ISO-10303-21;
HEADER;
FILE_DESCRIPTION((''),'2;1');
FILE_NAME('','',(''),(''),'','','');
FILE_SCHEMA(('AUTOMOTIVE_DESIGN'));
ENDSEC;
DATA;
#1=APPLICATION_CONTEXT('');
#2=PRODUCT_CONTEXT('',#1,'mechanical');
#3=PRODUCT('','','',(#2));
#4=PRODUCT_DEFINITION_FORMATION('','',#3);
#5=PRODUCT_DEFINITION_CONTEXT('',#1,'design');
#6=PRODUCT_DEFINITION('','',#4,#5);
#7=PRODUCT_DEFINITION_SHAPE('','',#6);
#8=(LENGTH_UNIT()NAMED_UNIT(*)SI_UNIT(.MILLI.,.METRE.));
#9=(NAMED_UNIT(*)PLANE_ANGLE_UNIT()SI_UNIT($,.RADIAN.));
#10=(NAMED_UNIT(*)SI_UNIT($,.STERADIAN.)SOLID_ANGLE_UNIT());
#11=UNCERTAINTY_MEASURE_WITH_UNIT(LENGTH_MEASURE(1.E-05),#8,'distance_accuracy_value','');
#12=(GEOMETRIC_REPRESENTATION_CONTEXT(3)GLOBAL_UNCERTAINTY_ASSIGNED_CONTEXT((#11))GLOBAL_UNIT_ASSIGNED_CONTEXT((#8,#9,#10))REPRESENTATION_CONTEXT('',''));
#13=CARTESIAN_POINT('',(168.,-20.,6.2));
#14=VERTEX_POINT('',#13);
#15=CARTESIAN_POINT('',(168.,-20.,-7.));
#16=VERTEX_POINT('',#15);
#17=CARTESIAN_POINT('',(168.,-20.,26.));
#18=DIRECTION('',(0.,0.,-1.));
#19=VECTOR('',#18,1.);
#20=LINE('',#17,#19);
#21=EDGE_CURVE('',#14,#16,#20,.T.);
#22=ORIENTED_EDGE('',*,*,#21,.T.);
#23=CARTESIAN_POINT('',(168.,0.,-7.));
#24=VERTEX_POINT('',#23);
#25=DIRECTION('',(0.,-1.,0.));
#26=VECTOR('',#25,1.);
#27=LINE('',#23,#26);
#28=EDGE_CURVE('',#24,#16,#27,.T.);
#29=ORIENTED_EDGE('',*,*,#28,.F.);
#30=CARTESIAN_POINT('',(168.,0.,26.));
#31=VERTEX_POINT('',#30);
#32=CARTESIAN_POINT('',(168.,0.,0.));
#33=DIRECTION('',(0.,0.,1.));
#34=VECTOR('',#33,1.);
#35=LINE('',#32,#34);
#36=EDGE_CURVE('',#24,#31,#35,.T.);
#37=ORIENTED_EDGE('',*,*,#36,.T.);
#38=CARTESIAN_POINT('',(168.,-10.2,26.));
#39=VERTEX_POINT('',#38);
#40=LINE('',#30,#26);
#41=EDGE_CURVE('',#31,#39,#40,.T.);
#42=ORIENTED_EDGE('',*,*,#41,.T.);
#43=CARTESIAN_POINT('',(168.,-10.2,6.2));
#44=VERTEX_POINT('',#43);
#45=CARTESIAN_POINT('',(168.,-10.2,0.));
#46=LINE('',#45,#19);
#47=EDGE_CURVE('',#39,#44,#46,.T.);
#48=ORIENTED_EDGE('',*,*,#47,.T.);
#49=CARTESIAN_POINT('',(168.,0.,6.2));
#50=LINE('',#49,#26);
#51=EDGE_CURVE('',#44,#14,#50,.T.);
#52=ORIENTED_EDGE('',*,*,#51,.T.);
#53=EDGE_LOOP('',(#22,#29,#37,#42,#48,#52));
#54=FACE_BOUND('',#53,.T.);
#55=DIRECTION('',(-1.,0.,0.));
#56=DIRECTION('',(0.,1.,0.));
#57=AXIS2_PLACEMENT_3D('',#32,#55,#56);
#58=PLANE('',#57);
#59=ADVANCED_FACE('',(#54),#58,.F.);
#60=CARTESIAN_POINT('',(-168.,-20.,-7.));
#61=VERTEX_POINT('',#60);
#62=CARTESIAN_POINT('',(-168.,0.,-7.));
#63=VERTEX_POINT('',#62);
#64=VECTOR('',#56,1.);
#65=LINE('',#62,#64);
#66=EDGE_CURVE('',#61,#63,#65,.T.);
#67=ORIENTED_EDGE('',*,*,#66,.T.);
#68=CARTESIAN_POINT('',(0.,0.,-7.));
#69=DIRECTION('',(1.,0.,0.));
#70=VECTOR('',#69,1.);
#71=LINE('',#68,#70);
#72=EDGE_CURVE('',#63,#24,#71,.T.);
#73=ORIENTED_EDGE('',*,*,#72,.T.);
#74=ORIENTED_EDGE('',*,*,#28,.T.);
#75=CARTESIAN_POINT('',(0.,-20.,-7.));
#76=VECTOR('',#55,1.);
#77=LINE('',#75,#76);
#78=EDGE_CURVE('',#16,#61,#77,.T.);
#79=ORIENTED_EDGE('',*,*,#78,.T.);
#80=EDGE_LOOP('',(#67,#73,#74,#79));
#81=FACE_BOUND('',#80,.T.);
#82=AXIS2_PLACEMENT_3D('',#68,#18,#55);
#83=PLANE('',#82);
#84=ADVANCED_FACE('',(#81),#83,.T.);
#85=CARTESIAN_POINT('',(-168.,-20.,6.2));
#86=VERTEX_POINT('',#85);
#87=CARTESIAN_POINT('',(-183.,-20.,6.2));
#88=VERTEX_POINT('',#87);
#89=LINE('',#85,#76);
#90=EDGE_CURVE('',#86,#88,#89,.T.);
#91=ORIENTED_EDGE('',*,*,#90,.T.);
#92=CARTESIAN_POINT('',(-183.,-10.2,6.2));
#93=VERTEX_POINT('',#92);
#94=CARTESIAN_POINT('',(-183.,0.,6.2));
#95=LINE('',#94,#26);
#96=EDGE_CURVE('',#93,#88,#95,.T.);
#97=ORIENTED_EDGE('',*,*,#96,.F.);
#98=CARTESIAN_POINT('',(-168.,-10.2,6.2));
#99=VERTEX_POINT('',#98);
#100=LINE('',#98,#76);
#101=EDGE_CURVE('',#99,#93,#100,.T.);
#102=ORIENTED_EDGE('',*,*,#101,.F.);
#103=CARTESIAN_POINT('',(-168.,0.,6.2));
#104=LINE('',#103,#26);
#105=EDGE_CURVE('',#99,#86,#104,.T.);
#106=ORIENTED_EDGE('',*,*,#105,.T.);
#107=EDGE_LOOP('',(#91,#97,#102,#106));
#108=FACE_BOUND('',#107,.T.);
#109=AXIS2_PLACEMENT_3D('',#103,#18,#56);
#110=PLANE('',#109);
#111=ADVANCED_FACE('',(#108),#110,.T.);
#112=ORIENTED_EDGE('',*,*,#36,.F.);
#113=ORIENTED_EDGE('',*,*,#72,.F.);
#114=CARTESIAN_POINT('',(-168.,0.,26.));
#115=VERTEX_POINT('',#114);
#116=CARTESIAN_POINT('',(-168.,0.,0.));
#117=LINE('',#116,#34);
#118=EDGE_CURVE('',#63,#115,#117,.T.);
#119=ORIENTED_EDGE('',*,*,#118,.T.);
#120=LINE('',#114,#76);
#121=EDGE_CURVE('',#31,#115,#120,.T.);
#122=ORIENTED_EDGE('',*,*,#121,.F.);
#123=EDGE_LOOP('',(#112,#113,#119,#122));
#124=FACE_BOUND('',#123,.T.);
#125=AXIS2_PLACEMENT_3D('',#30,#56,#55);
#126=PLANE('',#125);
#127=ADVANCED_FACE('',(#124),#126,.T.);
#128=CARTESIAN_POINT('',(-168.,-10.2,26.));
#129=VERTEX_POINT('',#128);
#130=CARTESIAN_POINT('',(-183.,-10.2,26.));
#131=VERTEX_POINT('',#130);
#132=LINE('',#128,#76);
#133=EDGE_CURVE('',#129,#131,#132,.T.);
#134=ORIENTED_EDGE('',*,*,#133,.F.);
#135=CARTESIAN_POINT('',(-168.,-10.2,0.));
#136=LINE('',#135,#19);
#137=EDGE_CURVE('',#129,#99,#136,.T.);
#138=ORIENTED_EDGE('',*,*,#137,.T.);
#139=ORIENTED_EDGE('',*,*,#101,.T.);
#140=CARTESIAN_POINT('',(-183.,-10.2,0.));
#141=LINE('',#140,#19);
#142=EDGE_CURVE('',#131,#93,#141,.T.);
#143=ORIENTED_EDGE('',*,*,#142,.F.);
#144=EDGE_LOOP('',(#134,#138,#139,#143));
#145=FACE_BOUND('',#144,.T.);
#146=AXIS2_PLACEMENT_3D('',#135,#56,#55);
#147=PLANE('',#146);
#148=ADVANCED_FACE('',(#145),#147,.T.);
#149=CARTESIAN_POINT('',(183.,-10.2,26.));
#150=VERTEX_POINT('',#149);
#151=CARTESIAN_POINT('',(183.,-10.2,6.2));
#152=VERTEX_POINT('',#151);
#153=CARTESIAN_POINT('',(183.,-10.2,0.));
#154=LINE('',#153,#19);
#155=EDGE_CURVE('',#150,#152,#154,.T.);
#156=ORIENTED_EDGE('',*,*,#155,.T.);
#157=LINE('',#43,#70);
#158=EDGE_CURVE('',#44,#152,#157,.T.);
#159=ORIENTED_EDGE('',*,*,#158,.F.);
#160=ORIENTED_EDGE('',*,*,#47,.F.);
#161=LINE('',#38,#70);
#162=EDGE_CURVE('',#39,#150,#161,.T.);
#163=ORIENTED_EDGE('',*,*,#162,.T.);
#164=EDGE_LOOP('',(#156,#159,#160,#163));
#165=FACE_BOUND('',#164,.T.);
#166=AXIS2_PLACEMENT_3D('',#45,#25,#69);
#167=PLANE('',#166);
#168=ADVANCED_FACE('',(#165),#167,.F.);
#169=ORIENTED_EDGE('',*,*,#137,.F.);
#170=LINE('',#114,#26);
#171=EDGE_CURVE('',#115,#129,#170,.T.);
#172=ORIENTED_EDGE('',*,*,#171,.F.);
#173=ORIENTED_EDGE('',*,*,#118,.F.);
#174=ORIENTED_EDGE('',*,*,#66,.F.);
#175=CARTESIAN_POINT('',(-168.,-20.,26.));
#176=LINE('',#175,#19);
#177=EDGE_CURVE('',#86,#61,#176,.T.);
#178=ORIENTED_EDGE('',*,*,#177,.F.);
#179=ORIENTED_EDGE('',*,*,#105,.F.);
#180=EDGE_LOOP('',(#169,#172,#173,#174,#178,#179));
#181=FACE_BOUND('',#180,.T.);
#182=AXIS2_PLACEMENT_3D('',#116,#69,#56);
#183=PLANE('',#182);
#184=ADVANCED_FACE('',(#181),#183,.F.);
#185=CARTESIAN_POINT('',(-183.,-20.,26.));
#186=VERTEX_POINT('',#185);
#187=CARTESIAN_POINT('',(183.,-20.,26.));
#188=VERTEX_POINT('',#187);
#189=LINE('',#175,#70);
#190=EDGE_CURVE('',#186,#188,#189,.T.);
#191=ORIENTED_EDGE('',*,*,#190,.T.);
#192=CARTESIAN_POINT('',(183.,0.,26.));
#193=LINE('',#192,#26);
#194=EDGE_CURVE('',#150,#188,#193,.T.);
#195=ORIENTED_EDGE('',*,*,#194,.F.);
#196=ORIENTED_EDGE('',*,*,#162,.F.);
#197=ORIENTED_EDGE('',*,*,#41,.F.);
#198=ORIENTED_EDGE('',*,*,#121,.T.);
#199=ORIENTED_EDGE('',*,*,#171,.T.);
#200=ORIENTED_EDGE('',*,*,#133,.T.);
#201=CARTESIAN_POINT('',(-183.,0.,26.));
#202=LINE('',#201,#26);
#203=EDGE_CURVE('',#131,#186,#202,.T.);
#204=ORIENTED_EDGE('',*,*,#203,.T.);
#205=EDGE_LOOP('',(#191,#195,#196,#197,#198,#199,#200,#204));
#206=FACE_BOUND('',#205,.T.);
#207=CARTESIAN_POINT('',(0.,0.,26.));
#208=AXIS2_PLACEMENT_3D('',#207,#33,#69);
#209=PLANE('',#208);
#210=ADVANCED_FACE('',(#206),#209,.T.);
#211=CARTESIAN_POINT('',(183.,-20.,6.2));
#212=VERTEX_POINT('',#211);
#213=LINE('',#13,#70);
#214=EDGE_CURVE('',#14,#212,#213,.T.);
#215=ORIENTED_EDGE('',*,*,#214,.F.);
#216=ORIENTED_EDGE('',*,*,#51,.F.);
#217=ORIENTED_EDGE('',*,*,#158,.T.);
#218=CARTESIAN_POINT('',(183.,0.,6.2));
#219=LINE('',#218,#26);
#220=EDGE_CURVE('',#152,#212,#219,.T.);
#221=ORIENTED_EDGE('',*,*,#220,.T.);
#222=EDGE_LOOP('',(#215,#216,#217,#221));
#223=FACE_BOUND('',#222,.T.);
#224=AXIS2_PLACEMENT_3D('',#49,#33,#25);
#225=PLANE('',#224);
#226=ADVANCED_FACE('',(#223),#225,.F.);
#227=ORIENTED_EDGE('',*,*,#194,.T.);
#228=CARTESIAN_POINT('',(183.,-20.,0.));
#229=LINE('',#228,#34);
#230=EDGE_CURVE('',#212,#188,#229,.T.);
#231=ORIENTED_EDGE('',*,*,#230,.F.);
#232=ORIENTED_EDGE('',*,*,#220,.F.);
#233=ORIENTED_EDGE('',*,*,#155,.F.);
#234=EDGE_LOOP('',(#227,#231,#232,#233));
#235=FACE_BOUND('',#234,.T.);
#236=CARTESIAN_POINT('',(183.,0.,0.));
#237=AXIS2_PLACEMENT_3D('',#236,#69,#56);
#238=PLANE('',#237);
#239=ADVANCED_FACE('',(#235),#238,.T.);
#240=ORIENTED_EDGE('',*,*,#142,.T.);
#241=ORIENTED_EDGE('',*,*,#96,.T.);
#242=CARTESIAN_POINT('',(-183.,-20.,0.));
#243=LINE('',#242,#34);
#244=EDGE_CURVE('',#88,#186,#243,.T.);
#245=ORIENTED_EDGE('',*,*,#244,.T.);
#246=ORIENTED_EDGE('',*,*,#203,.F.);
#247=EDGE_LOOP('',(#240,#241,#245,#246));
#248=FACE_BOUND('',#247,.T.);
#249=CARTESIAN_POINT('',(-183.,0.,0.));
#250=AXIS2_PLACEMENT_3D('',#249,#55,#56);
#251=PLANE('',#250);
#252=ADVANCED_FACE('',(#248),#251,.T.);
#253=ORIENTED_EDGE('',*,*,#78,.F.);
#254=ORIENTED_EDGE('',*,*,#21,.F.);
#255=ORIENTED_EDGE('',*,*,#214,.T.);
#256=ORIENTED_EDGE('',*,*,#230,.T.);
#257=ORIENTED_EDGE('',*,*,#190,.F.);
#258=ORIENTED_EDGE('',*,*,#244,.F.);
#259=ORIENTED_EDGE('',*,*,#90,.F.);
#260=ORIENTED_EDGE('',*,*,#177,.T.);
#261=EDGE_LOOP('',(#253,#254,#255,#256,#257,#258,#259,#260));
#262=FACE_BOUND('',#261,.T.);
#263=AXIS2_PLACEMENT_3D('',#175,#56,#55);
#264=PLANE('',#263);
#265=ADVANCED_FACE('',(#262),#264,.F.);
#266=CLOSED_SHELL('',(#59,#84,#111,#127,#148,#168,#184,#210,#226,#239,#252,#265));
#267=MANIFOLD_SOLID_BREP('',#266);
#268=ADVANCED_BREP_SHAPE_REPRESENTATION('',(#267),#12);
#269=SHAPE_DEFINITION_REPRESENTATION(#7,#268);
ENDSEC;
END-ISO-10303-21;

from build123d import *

# Parameters (mm, degrees)
EXTRUDE_1_DEPTH        = 26
EXTRUDE_2_DEPTH        = 19
FILLET_1_R             = 10
SKETCH_1_5_W           = 11
SKETCH_1_5_H           = 340
EXTRUDE_4_DEPTH        = 7
SKETCH_6_W             = 1.9
SKETCH_6_H             = 2
SKETCH_6_W_2           = 6.6
EXTRUDE_5_DEPTH        = 28
SKETCH_6_3_W           = 6.6
SKETCH_6_3_H           = 2
CUT_EXTRUDE_2_DEPTH    = 5
FILLET_2_R             = 20
SKETCH_6_4_W           = 15
SKETCH_6_4_H           = 10
SKETCH_6_4_H_2         = 9
EXTRUDE_6_DEPTH        = 30
SKETCH_6_5_W           = 15
SKETCH_6_5_H           = 9
EXTRUDE_7_DEPTH        = 28
EXTRUDE_8_DEPTH        = 15
FILLET_3_R             = 20
FILLET_3_OF_MIRROR_2_R = 20
FILLET_4_R             = 20
SKETCH_10_W            = 161
SKETCH_10_H            = 20
SKETCH_10_W_2          = 14
EXTRUDE_9_DEPTH        = 7
SKETCH_12_W            = 33
SKETCH_12_H            = 20
CUT_EXTRUDE_3_DEPTH    = 42
SKETCH_11_W            = 19.8
SKETCH_11_H            = 9.8
EXTRUDE_10_DEPTH       = 15


with BuildPart() as part:
    # 스케치1 → 보스-돌출1 (new body)
    with BuildSketch(Plane.XY):
        Polygon((-168, 0), (168, 0), (183, 0), (183, -340), (168, -340), (168, -20), (-168, -20), (-168, -340), (-183, -340), (-183, 0), align=None)
    extrude(amount=EXTRUDE_1_DEPTH)

    # 스케치1<4> → 보스-돌출2 (add)
    with BuildSketch(Plane.XY):
        Polygon((172, 0), (168, 0), (168, -20), (168, -340), (172, -340), align=None)
        Polygon((-168, -20), (-168, 0), (-172, 0), (-172, -340), (-168, -340), align=None)
    extrude(amount=-EXTRUDE_2_DEPTH)

    # 필렛1
    fillet_1_edges = [part.edges().sort_by_distance(p)[0] for p in [
        (170, 0, -19),
        (170, -340, -19),
        (-170, -340, -19),
        (-170, 0, -19),
    ]]
    fillet(fillet_1_edges, radius=FILLET_1_R)

    # 스케치1<5> → 보스-돌출4 (add)
    with BuildSketch(Plane.XY):
        with Locations((177.5, -170)):
            Rectangle(SKETCH_1_5_W, SKETCH_1_5_H)
        with Locations((-177.5, -170)):
            Rectangle(SKETCH_1_5_W, SKETCH_1_5_H)
    extrude(amount=-EXTRUDE_4_DEPTH)

    # 스케치6 → 보스-돌출5 (add)
    with BuildSketch(Plane.XZ.offset(340)):
        with Locations((-182.05, -6)):
            Rectangle(SKETCH_6_W, SKETCH_6_H)
        with Locations((-177.8, -6)):
            Rectangle(SKETCH_6_W_2, SKETCH_6_H)
        Polygon((-174.5, -7), (-172, -7), (-168, -7), (-168, -5), (-174.5, -5), align=None)
    extrude_5 = extrude(amount=EXTRUDE_5_DEPTH)

    # 스케치6<3> → 컷-돌출2 (cut)
    with BuildSketch(Plane.XZ.offset(340)):
        with Locations((-177.8, -6)):
            Rectangle(SKETCH_6_3_W, SKETCH_6_3_H)
    cut_extrude_2 = extrude(amount=CUT_EXTRUDE_2_DEPTH, mode=Mode.SUBTRACT)

    # 필렛2
    # the kernel refuses this fillet: 20 mm, written as the material it adds along each edge
    with BuildSketch(Plane(origin=(-172, -340, -7), x_dir=(0, -1, 0), z_dir=(1, 0, 0))) as fillet_2_piece_1:
        with BuildLine():
            CenterArc((14, 20), FILLET_2_R, 216.869897646, 53.130102354)
            Line((-2, 8), (-3.6, 6.8))
            ThreePointArc((-3.6, 6.8), (-2, 2), (-2, 0))
            Line((-2, 0), (0, -2))
            Line((0, -2), (14, -2))
            Line((14, -2), (14, 0))
        make_face()
    extrude(amount=4)

    # 스케치6<4> → 보스-돌출6 (add)
    with BuildSketch(Plane.XZ.offset(340)):
        with Locations((-175.5, 31)):
            Rectangle(SKETCH_6_4_W, SKETCH_6_4_H)
        with Locations((-175.5, 40.5)):
            Rectangle(SKETCH_6_4_W, SKETCH_6_4_H_2)
    extrude_6 = extrude(amount=-EXTRUDE_6_DEPTH)

    # 스케치6<5> → 보스-돌출7 (add)
    with BuildSketch(Plane.XZ.offset(340)):
        with Locations((-175.5, 40.5)):
            Rectangle(SKETCH_6_5_W, SKETCH_6_5_H)
    extrude_7 = extrude(amount=EXTRUDE_7_DEPTH)

    # 스케치9 → 보스-돌출8 (add)
    with BuildSketch(Plane.ZY.offset(183)):
        Polygon((26, -310), (45, -310), (26, -270), align=None)
    extrude_8 = extrude(amount=-EXTRUDE_8_DEPTH)

    # 필렛3
    fillet_3_edges = [part.edges().sort_by_distance(p)[0] for p in [
        (-175.5, -310, 45),
        (-175.5, -270, 26),
    ]]
    fillet(fillet_3_edges, radius=FILLET_3_R)

    # 대칭 복사2: 보스-돌출5, 컷-돌출2, 보스-돌출6, 보스-돌출7, 보스-돌출8 across plane
    add(extrude_5.mirror(Plane(origin=(0, 0, 0), x_dir=(0, 0, 1), z_dir=(1, 0, 0))))
    add(cut_extrude_2.mirror(Plane(origin=(0, 0, 0), x_dir=(0, 0, 1), z_dir=(1, 0, 0))), mode=Mode.SUBTRACT)
    add(extrude_6.mirror(Plane(origin=(0, 0, 0), x_dir=(0, 0, 1), z_dir=(1, 0, 0))))
    add(extrude_7.mirror(Plane(origin=(0, 0, 0), x_dir=(0, 0, 1), z_dir=(1, 0, 0))))
    add(extrude_8.mirror(Plane(origin=(0, 0, 0), x_dir=(0, 0, 1), z_dir=(1, 0, 0))))

    # 필렛3 of 대칭 복사2
    fillet_3_of_mirror_2_edges = [part.edges().sort_by_distance(p)[0] for p in [
        (175.5, -310, 45),
        (175.5, -270, 26),
    ]]
    fillet(fillet_3_of_mirror_2_edges, radius=FILLET_3_OF_MIRROR_2_R)

    # 필렛4
    # the kernel refuses this fillet: 20 mm, written as the material it adds along each edge
    with BuildSketch(Plane(origin=(172, -340, -7), x_dir=(0, -1, 0), z_dir=(-1, 0, 0))) as fillet_4_piece_1:
        with BuildLine():
            CenterArc((14, -20), FILLET_4_R, 90, 53.130102354)
            Line((-2, -8), (-3.6, -6.8))
            ThreePointArc((-3.6, -6.8), (-2, -2), (-2, 0))
            Line((-2, 0), (0, 2))
            Line((0, 2), (14, 2))
            Line((14, 2), (14, 0))
        make_face()
    extrude(amount=4)

    # 스케치10 → 보스-돌출9 (add)
    with BuildSketch(Plane(origin=(0, 0, 0), x_dir=(-1, 0, 0), z_dir=(0, 0, -1))):
        with Locations((87.5, -10)):
            Rectangle(SKETCH_10_W, SKETCH_10_H)
        with Locations((-87.5, -10)):
            Rectangle(SKETCH_10_W, SKETCH_10_H)
        with Locations((0, -10)):
            Rectangle(SKETCH_10_W_2, SKETCH_10_H)
    extrude(amount=EXTRUDE_9_DEPTH)

    # 스케치12 → 컷-돌출3 (cut)
    with BuildSketch(Plane(origin=(-168, 0, 0), x_dir=(0, 0, -1), z_dir=(1, 0, 0))):
        with BuildLine():
            ThreePointArc((-43.065550087, -305.927473868), (-44.510394688, -310.110371974), (-45, -314.508610159))
            Line((-45, -314.508610159), (-45, -368))
            Line((-45, -368), (-36, -368))
            Line((-36, -368), (-36, -340))
            Line((-36, -340), (5, -340))
            Line((5, -340), (5, -368))
            Line((5, -368), (7, -368))
            Line((7, -368), (7, -354))
            Line((7, -354), (7, -20))
            Line((7, -20), (-26, -20))
            Line((-26, -20), (-26, -265.491389841))
            ThreePointArc((-26, -265.491389841), (-26.489605312, -269.889628026), (-27.934449913, -274.072526132))
            Line((-27.934449913, -274.072526132), (-43.065550087, -305.927473868))
        make_face()
        with Locations((-9.5, -10)):
            Rectangle(SKETCH_12_W, SKETCH_12_H)
        with BuildLine():
            Line((7, 0), (7, -20))
            Line((7, -20), (7, -354))
            ThreePointArc((7, -354), (9.11145618, -345.05572809), (15, -338))
            ThreePointArc((15, -338), (17.94427191, -334.472135955), (19, -330))
            Line((19, -330), (19, -10))
            ThreePointArc((19, -10), (16.071067812, -2.928932188), (9, 0))
            Line((9, 0), (7, 0))
        make_face()
    cut_extrude_3 = extrude(amount=-CUT_EXTRUDE_3_DEPTH, mode=Mode.SUBTRACT)

    # 대칭 복사3: 컷-돌출3 across plane
    add(cut_extrude_3.mirror(Plane(origin=(0, 0, 0), x_dir=(0, 0, 1), z_dir=(1, 0, 0))), mode=Mode.SUBTRACT)

    # 스케치11 → 보스-돌출10 (add)
    with BuildSketch(Plane(origin=(183, 0, 0), x_dir=(0, 0, -1), z_dir=(1, 0, 0))):
        with Locations((-16.1, -15.1)):
            Rectangle(SKETCH_11_W, SKETCH_11_H)
    extrude_10 = extrude(amount=-EXTRUDE_10_DEPTH)

    # 대칭 복사4: 보스-돌출10 across plane
    add(extrude_10.mirror(Plane(origin=(0, 0, 0), x_dir=(0, 0, 1), z_dir=(1, 0, 0))))


solid = part.part
